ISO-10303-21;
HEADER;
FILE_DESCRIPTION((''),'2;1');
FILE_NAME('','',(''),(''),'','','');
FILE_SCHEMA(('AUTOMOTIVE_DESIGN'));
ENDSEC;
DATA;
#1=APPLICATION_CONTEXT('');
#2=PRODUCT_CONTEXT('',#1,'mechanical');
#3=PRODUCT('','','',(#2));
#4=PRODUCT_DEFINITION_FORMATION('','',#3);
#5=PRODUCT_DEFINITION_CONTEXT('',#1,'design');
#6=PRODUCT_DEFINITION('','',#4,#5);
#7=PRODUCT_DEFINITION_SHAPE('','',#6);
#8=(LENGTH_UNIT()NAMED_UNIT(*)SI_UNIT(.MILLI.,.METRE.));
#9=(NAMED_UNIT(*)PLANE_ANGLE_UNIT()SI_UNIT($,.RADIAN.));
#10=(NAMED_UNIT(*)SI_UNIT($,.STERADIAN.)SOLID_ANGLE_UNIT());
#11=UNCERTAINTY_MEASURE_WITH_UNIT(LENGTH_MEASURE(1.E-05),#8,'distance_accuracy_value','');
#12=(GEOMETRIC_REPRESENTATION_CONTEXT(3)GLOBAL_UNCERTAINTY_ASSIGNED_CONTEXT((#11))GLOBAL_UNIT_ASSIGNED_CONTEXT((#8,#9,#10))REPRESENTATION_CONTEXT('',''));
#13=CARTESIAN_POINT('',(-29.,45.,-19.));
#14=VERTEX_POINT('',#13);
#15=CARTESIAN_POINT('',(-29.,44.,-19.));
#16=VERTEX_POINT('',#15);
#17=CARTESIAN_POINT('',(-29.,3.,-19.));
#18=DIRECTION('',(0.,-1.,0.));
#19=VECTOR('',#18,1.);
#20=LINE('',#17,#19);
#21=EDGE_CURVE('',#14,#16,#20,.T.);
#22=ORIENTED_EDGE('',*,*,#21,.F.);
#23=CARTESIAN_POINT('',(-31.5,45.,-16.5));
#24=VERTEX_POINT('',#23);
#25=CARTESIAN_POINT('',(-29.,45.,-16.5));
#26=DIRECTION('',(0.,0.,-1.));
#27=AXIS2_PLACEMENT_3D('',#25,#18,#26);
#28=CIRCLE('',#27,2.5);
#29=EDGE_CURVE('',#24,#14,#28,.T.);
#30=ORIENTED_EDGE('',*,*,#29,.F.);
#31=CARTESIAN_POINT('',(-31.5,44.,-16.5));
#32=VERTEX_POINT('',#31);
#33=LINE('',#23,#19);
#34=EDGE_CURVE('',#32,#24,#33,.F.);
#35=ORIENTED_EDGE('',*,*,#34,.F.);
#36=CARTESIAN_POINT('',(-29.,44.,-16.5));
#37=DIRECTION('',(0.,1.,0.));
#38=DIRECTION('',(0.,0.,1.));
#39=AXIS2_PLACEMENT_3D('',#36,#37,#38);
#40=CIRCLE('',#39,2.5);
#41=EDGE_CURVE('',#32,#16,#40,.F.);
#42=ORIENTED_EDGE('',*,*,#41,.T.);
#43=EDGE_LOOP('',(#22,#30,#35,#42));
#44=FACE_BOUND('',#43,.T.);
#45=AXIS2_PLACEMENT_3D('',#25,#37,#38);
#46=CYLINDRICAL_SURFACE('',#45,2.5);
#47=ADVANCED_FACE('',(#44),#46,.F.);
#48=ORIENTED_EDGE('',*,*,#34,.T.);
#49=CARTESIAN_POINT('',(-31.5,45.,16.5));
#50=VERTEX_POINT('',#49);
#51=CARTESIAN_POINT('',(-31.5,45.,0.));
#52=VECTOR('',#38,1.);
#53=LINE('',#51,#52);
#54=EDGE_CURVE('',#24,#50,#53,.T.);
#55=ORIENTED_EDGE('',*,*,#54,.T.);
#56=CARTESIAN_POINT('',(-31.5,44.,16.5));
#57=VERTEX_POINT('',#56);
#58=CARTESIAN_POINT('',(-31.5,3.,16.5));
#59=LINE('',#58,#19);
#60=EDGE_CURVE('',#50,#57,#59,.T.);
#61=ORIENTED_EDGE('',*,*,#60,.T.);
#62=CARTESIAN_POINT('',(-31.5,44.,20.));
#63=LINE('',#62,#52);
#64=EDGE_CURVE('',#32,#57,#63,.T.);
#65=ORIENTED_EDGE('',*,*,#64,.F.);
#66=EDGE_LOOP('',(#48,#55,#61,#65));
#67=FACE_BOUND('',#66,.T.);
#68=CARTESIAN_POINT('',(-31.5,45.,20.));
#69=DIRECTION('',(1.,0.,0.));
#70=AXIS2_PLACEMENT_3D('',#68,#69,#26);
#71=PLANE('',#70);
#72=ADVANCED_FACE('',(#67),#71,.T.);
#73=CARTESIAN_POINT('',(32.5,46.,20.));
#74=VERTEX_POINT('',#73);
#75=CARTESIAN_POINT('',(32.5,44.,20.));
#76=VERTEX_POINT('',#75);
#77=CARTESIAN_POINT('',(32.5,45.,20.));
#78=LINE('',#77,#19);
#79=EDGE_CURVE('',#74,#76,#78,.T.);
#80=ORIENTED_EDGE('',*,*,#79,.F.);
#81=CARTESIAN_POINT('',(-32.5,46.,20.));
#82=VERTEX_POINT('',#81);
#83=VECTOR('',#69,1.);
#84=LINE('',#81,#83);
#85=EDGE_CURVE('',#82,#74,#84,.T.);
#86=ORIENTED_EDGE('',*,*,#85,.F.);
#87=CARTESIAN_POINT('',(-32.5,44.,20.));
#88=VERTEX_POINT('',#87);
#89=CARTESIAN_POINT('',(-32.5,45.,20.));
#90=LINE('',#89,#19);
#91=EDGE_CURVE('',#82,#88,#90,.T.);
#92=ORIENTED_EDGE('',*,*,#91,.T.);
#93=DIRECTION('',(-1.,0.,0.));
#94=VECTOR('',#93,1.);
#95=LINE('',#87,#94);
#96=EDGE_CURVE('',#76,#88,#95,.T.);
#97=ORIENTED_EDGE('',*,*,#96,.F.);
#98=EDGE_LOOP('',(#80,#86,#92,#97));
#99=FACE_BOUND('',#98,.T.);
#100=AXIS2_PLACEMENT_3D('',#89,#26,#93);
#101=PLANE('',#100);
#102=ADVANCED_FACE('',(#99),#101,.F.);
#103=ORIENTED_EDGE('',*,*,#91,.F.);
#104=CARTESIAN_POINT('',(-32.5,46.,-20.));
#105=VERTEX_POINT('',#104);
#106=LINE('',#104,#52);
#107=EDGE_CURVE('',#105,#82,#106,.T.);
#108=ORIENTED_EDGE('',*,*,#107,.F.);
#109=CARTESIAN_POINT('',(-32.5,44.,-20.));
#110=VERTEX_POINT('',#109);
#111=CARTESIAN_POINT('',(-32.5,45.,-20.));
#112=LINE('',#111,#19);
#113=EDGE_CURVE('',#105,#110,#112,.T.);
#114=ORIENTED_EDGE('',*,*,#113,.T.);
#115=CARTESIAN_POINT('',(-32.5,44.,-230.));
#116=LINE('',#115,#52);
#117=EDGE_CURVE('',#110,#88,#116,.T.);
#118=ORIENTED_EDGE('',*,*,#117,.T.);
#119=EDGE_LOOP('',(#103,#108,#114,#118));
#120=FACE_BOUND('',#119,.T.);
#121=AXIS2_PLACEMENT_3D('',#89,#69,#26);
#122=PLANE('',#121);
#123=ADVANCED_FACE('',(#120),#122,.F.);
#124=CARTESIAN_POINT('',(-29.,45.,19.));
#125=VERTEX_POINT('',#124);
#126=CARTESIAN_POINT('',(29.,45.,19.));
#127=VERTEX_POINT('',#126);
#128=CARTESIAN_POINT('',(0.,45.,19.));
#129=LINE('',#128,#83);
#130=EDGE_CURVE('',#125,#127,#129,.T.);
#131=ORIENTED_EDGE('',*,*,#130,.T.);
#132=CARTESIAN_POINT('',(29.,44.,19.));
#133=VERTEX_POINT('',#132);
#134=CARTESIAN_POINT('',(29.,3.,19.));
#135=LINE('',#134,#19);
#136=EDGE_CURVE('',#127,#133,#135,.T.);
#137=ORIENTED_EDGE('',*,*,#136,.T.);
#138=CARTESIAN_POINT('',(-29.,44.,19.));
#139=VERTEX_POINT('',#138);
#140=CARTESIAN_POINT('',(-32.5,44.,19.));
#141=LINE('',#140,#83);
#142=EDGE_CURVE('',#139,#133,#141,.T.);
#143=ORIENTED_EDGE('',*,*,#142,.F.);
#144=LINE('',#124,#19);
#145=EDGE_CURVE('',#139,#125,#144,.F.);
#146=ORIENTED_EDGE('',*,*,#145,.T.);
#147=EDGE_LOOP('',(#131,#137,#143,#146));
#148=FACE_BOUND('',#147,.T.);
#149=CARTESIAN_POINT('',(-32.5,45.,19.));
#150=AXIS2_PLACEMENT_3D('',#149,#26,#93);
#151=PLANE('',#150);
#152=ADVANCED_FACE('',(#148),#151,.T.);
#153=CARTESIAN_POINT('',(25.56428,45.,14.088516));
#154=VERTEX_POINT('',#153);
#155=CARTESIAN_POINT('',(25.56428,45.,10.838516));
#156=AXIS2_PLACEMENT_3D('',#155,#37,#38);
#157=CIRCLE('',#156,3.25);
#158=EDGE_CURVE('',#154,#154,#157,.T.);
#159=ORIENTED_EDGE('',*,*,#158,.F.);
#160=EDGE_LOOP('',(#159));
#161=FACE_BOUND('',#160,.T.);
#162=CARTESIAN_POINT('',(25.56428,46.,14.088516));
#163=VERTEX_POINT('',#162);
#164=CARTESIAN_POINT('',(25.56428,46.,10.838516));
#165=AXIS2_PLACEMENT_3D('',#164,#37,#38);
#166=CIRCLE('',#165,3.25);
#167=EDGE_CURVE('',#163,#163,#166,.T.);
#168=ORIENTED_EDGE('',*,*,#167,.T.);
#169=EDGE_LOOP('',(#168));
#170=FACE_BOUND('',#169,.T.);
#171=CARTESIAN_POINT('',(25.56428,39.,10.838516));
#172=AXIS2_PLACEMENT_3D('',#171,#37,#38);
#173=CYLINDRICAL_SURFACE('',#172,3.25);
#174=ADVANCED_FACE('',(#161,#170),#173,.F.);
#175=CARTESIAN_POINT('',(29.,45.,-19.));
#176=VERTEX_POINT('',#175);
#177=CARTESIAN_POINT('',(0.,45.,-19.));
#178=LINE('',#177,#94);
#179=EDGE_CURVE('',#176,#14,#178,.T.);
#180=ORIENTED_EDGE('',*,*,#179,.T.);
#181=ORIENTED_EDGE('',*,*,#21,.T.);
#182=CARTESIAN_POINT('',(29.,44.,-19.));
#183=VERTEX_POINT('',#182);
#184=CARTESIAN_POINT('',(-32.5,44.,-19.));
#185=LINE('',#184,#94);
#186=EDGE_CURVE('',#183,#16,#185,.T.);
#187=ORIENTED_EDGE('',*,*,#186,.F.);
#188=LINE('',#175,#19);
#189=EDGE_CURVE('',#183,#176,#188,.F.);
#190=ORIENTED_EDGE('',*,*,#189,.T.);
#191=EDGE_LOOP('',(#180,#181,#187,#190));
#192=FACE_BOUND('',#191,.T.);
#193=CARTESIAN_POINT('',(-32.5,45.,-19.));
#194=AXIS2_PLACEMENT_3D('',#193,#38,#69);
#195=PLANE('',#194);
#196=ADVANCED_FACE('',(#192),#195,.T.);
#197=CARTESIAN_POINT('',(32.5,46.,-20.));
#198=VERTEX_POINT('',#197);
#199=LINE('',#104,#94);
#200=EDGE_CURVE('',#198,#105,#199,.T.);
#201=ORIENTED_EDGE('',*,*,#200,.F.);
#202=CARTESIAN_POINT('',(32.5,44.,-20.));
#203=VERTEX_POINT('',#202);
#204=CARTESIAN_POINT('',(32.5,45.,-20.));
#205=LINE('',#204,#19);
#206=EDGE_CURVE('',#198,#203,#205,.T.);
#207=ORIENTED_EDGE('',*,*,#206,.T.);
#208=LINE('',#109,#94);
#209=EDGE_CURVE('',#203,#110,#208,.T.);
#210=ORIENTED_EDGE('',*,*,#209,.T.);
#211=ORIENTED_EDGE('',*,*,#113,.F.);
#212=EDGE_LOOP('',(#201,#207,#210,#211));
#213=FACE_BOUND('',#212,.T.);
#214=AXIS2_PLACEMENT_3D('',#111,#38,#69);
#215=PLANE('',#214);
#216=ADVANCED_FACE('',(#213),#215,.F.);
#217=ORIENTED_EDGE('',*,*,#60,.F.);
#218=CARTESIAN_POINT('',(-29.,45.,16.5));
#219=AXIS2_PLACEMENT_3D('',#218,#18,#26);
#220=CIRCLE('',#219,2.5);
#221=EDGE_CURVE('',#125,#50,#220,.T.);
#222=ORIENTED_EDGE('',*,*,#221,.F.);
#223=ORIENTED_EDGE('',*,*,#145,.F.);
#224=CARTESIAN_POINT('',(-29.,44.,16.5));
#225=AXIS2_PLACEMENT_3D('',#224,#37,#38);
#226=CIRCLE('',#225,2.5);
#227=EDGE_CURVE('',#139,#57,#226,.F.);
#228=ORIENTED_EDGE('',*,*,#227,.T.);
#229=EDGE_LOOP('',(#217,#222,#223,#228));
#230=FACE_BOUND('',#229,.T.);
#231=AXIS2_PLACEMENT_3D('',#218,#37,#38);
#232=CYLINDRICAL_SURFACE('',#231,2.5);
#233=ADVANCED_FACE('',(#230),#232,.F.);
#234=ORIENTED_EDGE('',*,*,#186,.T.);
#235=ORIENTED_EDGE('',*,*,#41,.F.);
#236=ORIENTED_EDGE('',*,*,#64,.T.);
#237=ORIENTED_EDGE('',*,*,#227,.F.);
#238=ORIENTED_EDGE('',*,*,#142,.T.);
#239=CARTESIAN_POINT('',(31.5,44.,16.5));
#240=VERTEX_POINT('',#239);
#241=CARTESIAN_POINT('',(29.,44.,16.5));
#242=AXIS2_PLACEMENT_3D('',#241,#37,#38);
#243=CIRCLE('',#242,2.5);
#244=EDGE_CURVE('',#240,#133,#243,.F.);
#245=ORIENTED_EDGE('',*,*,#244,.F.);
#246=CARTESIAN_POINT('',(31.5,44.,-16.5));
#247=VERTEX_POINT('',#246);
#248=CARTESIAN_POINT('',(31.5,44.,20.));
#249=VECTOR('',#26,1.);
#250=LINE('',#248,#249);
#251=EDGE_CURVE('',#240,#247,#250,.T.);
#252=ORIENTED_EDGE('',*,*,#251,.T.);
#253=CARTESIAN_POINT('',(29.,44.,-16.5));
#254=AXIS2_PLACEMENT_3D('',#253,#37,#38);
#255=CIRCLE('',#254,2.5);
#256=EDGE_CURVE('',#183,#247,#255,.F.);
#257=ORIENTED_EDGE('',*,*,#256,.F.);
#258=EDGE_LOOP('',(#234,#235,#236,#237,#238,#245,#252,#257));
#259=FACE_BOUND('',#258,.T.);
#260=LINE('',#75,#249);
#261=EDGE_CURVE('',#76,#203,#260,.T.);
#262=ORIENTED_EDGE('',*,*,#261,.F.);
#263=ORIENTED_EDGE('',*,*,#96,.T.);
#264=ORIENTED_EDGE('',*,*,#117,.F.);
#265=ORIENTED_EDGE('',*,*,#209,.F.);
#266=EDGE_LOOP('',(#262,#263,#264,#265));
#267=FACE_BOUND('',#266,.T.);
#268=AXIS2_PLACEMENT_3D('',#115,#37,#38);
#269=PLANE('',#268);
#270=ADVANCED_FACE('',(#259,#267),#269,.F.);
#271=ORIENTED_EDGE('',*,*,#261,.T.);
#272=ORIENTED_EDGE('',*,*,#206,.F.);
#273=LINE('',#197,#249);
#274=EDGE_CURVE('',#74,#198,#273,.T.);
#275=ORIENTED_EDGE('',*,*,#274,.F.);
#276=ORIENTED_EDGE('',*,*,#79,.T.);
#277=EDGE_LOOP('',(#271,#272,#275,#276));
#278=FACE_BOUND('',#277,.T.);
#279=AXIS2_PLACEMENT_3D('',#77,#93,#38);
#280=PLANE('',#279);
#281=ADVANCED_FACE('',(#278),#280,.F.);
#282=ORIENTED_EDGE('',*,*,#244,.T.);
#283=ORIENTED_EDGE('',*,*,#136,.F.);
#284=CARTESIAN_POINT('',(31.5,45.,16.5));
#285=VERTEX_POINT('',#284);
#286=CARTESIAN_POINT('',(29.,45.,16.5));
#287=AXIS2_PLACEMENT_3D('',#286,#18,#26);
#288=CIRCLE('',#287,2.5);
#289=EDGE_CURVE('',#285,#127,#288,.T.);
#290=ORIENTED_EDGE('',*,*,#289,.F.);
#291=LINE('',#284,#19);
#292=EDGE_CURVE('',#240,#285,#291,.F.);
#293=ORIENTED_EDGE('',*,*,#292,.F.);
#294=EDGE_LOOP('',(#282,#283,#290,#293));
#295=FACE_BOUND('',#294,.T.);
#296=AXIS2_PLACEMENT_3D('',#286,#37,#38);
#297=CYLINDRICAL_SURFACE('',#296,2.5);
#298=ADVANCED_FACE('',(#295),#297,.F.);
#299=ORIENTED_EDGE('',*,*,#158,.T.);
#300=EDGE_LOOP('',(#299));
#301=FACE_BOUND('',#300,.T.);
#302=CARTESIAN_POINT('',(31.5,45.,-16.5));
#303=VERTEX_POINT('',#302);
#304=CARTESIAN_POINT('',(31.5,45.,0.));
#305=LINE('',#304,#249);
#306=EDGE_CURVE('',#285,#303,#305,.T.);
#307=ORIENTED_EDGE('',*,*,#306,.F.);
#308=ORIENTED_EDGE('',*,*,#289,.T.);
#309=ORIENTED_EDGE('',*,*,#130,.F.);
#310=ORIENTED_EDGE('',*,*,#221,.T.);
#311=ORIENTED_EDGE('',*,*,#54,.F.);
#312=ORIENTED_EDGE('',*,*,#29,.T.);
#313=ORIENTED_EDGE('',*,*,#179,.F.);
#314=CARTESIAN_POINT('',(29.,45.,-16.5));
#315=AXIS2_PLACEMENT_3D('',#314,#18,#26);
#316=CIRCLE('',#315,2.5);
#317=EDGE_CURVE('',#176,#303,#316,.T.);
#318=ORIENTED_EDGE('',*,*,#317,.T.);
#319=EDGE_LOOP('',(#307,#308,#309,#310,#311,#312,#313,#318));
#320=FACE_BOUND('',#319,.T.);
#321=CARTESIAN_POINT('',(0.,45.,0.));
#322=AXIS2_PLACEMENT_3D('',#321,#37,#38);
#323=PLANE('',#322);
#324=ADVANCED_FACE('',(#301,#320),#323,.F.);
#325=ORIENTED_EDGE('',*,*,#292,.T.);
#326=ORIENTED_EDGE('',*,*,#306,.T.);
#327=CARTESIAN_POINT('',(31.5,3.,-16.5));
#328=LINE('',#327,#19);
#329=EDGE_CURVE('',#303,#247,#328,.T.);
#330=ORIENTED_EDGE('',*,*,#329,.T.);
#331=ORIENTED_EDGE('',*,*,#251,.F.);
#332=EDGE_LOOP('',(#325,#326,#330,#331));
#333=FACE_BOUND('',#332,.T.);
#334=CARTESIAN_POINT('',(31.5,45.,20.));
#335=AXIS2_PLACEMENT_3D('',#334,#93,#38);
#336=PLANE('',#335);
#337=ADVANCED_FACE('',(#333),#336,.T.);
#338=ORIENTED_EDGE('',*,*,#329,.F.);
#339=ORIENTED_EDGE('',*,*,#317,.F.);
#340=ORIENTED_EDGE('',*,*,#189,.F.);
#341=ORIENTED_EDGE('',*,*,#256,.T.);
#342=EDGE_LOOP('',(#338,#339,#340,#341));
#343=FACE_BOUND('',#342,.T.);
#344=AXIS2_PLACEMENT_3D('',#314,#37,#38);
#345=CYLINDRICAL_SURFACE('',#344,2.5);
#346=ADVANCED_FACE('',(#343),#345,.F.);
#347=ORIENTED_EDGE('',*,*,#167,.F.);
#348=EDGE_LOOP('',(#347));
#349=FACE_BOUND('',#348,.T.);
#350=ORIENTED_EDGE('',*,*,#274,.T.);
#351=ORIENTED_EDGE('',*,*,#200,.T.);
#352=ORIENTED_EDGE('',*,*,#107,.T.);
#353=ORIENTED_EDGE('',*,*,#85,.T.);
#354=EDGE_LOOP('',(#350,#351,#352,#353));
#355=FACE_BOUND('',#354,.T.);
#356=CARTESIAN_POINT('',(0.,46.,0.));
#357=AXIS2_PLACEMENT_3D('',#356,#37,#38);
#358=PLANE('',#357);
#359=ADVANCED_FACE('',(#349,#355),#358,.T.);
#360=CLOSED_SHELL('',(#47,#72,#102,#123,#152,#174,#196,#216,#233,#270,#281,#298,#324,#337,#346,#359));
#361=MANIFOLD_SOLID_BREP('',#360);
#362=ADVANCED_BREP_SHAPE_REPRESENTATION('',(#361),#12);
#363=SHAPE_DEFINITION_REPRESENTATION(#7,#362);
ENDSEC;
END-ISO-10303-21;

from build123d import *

# Parameters (mm, degrees)
SKETCH1_W           = 65
SKETCH1_H           = 40
BOSS_EXTRUDE1_DEPTH = 45
SHELL1_T            = -1
SKETCH2_R           = 5
CUT_EXTRUDE1_DEPTH  = 8
SKETCH3_R           = 7.5
CUT_EXTRUDE2_DEPTH  = 8
FILLET1_R           = 2
FILLET2_R           = 2.5
SKETCH5_W           = 66.843722153
SKETCH5_H           = 46.578661822
CUT_EXTRUDE3_DEPTH  = 250
SKETCH7_W           = 65
SKETCH7_H           = 40
BOSS_EXTRUDE3_DEPTH = 1
SKETCH8_R           = 3.25
CUT_EXTRUDE4_DEPTH  = 7


with BuildPart() as part:
    # Sketch1 → Boss-Extrude1 (new body)
    with BuildSketch(Plane(origin=(0, 0, 0), x_dir=(1, 0, 0), z_dir=(0, 1, 0))):
        Rectangle(SKETCH1_W, SKETCH1_H)
    extrude(amount=BOSS_EXTRUDE1_DEPTH)

    # Shell1
    shell1_openings = [part.faces().sort_by_distance(p)[0] for p in [
        (0, 45, 0),
    ]]
    offset(amount=SHELL1_T, openings=shell1_openings, kind=Kind.INTERSECTION)

    # Sketch2 → Cut-Extrude1 (cut)
    with BuildSketch(Plane(origin=(32.5, 0, 0), x_dir=(0, 0, -1), z_dir=(1, 0, 0))):
        with Locations((0, 26)):
            Circle(SKETCH2_R)
    extrude(amount=-CUT_EXTRUDE1_DEPTH, mode=Mode.SUBTRACT)

    # Sketch3 → Cut-Extrude2 (cut)
    with BuildSketch(Plane.XZ):
        with Locations(Location((0, 0, 0), (0, 0, 270))):
            Circle(SKETCH3_R)
    extrude(amount=-CUT_EXTRUDE2_DEPTH, mode=Mode.SUBTRACT)

    # Fillet1
    # the kernel refuses this fillet: 2 mm, written as the material it adds along each edge
    with BuildSketch(Plane(origin=(31.5, 1, 19), x_dir=(0, 1, 0), z_dir=(0, 0, -1)), Plane(origin=(-31.5, 1, -19), x_dir=(0, 1, 0), z_dir=(0, 0, 1))) as fillet1_piece_1:
        with BuildLine():
            CenterArc((FILLET1_R, -FILLET1_R), FILLET1_R, 90, 90)
            Line((0, -FILLET1_R), (0, 0))
            Line((0, 0), (FILLET1_R, 0))
        make_face()
    extrude(amount=38)
    with BuildSketch(Plane(origin=(31.5, 1, -19), x_dir=(0, 1, 0), z_dir=(-1, 0, 0)), Plane(origin=(-31.5, 1, 19), x_dir=(0, 1, 0), z_dir=(1, 0, 0))) as fillet1_piece_2:
        with BuildLine():
            CenterArc((FILLET1_R, -FILLET1_R), FILLET1_R, 90, 90)
            Line((0, -FILLET1_R), (0, 0))
            Line((0, 0), (FILLET1_R, 0))
        make_face()
    extrude(amount=63)
    # the kernel refuses this fillet: 2 mm, written as the material it takes off along each edge
    with BuildSketch(Plane(origin=(0, 1, 0), x_dir=(0, 0, -1), z_dir=(-1, 0, 0))) as fillet1_2_piece_1:
        with BuildLine():
            CenterArc((9.232050808, 2), FILLET1_R, 210, 60)
            Line((9.232050808, 0), (7.5, 0))
            Line((7.5, 0), (7.5, 1))
        make_face()
    revolve(axis=Axis((0, 1, 0), (0, -1, 0)), mode=Mode.SUBTRACT)

    # Fillet2
    # the kernel refuses this fillet: 2.5 mm, written as the material it adds along each edge
    with BuildSketch(Plane(origin=(-29, 1, -16.5), x_dir=(-1, 0, 0), z_dir=(0, 0, 1))) as fillet2_piece_1:
        with BuildLine():
            CenterArc((0.5, -2), 2, 0, 90)
            Line((2.5, -2), (2.5, 0))
            Line((2.5, 0), (0.5, 0))
        make_face()
    revolve(axis=Axis((-29, 1, -16.5), (0, -1, 0)), revolution_arc=90)
    with BuildSketch(Plane(origin=(29, 1, -16.5), x_dir=(0, 0, -1), z_dir=(-1, 0, 0))) as fillet2_piece_2:
        with BuildLine():
            CenterArc((0.5, -2), 2, 0, 90)
            Line((2.5, -2), (2.5, 0))
            Line((2.5, 0), (0.5, 0))
        make_face()
    revolve(axis=Axis((29, 1, -16.5), (0, -1, 0)), revolution_arc=90)
    with BuildSketch(Plane(origin=(-29, 1, 16.5), x_dir=(0, 0, 1), z_dir=(1, 0, 0))) as fillet2_piece_3:
        with BuildLine():
            CenterArc((0.5, -2), 2, 0, 90)
            Line((2.5, -2), (2.5, 0))
            Line((2.5, 0), (0.5, 0))
        make_face()
    revolve(axis=Axis((-29, 1, 16.5), (0, -1, 0)), revolution_arc=90)
    with BuildSketch(Plane(origin=(29, 1, 16.5), x_dir=(1, 0, 0), z_dir=(0, 0, -1))) as fillet2_piece_4:
        with BuildLine():
            CenterArc((0.5, -2), 2, 0, 90)
            Line((2.5, -2), (2.5, 0))
            Line((2.5, 0), (0.5, 0))
        make_face()
    revolve(axis=Axis((29, 1, 16.5), (0, -1, 0)), revolution_arc=90)
    with BuildSketch(Plane(origin=(31.5, 1, 19), x_dir=(0, 0, -1), z_dir=(0, 1, 0)), Plane(origin=(31.5, 1, -19), x_dir=(-1, 0, 0), z_dir=(0, 1, 0)), Plane(origin=(-31.5, 45, 19), x_dir=(0, 0, -1), z_dir=(0, -1, 0))) as fillet2_piece_5:
        with BuildLine():
            CenterArc((FILLET2_R, FILLET2_R), FILLET2_R, 180, 90)
            Line((0, FILLET2_R), (0, 0))
            Line((0, 0), (FILLET2_R, 0))
        make_face()
    extrude(amount=44)
    with BuildSketch(Plane(origin=(-31.5, 1, -19), x_dir=(1, 0, 0), z_dir=(0, 1, 0))) as fillet2_piece_6:
        with BuildLine():
            CenterArc((FILLET2_R, -FILLET2_R), FILLET2_R, 90, 90)
            Line((0, -FILLET2_R), (0, 0))
            Line((0, 0), (FILLET2_R, 0))
        make_face()
    extrude(amount=44)

    # Sketch5 → Cut-Extrude3 (cut)
    with BuildSketch(Plane.XY.offset(20)):
        with Locations((0.921861077, 20.710669089)):
            Rectangle(SKETCH5_W, SKETCH5_H)
    extrude(amount=-CUT_EXTRUDE3_DEPTH, mode=Mode.SUBTRACT)

    # Sketch7 → Boss-Extrude3 (add)
    with BuildSketch(Plane(origin=(0, 45, 0), x_dir=(1, 0, 0), z_dir=(0, 1, 0))):
        Rectangle(SKETCH7_W, SKETCH7_H)
    extrude(amount=BOSS_EXTRUDE3_DEPTH)

    # Sketch8 → Cut-Extrude4 (cut)
    with BuildSketch(Plane(origin=(0, 46, 0), x_dir=(1, 0, 0), z_dir=(0, 1, 0))):
        with Locations(Location((25.564279631, -10.838515608, 0), (0, 0, 270))):
            Circle(SKETCH8_R)
    extrude(amount=-CUT_EXTRUDE4_DEPTH, mode=Mode.SUBTRACT)


solid = part.part
